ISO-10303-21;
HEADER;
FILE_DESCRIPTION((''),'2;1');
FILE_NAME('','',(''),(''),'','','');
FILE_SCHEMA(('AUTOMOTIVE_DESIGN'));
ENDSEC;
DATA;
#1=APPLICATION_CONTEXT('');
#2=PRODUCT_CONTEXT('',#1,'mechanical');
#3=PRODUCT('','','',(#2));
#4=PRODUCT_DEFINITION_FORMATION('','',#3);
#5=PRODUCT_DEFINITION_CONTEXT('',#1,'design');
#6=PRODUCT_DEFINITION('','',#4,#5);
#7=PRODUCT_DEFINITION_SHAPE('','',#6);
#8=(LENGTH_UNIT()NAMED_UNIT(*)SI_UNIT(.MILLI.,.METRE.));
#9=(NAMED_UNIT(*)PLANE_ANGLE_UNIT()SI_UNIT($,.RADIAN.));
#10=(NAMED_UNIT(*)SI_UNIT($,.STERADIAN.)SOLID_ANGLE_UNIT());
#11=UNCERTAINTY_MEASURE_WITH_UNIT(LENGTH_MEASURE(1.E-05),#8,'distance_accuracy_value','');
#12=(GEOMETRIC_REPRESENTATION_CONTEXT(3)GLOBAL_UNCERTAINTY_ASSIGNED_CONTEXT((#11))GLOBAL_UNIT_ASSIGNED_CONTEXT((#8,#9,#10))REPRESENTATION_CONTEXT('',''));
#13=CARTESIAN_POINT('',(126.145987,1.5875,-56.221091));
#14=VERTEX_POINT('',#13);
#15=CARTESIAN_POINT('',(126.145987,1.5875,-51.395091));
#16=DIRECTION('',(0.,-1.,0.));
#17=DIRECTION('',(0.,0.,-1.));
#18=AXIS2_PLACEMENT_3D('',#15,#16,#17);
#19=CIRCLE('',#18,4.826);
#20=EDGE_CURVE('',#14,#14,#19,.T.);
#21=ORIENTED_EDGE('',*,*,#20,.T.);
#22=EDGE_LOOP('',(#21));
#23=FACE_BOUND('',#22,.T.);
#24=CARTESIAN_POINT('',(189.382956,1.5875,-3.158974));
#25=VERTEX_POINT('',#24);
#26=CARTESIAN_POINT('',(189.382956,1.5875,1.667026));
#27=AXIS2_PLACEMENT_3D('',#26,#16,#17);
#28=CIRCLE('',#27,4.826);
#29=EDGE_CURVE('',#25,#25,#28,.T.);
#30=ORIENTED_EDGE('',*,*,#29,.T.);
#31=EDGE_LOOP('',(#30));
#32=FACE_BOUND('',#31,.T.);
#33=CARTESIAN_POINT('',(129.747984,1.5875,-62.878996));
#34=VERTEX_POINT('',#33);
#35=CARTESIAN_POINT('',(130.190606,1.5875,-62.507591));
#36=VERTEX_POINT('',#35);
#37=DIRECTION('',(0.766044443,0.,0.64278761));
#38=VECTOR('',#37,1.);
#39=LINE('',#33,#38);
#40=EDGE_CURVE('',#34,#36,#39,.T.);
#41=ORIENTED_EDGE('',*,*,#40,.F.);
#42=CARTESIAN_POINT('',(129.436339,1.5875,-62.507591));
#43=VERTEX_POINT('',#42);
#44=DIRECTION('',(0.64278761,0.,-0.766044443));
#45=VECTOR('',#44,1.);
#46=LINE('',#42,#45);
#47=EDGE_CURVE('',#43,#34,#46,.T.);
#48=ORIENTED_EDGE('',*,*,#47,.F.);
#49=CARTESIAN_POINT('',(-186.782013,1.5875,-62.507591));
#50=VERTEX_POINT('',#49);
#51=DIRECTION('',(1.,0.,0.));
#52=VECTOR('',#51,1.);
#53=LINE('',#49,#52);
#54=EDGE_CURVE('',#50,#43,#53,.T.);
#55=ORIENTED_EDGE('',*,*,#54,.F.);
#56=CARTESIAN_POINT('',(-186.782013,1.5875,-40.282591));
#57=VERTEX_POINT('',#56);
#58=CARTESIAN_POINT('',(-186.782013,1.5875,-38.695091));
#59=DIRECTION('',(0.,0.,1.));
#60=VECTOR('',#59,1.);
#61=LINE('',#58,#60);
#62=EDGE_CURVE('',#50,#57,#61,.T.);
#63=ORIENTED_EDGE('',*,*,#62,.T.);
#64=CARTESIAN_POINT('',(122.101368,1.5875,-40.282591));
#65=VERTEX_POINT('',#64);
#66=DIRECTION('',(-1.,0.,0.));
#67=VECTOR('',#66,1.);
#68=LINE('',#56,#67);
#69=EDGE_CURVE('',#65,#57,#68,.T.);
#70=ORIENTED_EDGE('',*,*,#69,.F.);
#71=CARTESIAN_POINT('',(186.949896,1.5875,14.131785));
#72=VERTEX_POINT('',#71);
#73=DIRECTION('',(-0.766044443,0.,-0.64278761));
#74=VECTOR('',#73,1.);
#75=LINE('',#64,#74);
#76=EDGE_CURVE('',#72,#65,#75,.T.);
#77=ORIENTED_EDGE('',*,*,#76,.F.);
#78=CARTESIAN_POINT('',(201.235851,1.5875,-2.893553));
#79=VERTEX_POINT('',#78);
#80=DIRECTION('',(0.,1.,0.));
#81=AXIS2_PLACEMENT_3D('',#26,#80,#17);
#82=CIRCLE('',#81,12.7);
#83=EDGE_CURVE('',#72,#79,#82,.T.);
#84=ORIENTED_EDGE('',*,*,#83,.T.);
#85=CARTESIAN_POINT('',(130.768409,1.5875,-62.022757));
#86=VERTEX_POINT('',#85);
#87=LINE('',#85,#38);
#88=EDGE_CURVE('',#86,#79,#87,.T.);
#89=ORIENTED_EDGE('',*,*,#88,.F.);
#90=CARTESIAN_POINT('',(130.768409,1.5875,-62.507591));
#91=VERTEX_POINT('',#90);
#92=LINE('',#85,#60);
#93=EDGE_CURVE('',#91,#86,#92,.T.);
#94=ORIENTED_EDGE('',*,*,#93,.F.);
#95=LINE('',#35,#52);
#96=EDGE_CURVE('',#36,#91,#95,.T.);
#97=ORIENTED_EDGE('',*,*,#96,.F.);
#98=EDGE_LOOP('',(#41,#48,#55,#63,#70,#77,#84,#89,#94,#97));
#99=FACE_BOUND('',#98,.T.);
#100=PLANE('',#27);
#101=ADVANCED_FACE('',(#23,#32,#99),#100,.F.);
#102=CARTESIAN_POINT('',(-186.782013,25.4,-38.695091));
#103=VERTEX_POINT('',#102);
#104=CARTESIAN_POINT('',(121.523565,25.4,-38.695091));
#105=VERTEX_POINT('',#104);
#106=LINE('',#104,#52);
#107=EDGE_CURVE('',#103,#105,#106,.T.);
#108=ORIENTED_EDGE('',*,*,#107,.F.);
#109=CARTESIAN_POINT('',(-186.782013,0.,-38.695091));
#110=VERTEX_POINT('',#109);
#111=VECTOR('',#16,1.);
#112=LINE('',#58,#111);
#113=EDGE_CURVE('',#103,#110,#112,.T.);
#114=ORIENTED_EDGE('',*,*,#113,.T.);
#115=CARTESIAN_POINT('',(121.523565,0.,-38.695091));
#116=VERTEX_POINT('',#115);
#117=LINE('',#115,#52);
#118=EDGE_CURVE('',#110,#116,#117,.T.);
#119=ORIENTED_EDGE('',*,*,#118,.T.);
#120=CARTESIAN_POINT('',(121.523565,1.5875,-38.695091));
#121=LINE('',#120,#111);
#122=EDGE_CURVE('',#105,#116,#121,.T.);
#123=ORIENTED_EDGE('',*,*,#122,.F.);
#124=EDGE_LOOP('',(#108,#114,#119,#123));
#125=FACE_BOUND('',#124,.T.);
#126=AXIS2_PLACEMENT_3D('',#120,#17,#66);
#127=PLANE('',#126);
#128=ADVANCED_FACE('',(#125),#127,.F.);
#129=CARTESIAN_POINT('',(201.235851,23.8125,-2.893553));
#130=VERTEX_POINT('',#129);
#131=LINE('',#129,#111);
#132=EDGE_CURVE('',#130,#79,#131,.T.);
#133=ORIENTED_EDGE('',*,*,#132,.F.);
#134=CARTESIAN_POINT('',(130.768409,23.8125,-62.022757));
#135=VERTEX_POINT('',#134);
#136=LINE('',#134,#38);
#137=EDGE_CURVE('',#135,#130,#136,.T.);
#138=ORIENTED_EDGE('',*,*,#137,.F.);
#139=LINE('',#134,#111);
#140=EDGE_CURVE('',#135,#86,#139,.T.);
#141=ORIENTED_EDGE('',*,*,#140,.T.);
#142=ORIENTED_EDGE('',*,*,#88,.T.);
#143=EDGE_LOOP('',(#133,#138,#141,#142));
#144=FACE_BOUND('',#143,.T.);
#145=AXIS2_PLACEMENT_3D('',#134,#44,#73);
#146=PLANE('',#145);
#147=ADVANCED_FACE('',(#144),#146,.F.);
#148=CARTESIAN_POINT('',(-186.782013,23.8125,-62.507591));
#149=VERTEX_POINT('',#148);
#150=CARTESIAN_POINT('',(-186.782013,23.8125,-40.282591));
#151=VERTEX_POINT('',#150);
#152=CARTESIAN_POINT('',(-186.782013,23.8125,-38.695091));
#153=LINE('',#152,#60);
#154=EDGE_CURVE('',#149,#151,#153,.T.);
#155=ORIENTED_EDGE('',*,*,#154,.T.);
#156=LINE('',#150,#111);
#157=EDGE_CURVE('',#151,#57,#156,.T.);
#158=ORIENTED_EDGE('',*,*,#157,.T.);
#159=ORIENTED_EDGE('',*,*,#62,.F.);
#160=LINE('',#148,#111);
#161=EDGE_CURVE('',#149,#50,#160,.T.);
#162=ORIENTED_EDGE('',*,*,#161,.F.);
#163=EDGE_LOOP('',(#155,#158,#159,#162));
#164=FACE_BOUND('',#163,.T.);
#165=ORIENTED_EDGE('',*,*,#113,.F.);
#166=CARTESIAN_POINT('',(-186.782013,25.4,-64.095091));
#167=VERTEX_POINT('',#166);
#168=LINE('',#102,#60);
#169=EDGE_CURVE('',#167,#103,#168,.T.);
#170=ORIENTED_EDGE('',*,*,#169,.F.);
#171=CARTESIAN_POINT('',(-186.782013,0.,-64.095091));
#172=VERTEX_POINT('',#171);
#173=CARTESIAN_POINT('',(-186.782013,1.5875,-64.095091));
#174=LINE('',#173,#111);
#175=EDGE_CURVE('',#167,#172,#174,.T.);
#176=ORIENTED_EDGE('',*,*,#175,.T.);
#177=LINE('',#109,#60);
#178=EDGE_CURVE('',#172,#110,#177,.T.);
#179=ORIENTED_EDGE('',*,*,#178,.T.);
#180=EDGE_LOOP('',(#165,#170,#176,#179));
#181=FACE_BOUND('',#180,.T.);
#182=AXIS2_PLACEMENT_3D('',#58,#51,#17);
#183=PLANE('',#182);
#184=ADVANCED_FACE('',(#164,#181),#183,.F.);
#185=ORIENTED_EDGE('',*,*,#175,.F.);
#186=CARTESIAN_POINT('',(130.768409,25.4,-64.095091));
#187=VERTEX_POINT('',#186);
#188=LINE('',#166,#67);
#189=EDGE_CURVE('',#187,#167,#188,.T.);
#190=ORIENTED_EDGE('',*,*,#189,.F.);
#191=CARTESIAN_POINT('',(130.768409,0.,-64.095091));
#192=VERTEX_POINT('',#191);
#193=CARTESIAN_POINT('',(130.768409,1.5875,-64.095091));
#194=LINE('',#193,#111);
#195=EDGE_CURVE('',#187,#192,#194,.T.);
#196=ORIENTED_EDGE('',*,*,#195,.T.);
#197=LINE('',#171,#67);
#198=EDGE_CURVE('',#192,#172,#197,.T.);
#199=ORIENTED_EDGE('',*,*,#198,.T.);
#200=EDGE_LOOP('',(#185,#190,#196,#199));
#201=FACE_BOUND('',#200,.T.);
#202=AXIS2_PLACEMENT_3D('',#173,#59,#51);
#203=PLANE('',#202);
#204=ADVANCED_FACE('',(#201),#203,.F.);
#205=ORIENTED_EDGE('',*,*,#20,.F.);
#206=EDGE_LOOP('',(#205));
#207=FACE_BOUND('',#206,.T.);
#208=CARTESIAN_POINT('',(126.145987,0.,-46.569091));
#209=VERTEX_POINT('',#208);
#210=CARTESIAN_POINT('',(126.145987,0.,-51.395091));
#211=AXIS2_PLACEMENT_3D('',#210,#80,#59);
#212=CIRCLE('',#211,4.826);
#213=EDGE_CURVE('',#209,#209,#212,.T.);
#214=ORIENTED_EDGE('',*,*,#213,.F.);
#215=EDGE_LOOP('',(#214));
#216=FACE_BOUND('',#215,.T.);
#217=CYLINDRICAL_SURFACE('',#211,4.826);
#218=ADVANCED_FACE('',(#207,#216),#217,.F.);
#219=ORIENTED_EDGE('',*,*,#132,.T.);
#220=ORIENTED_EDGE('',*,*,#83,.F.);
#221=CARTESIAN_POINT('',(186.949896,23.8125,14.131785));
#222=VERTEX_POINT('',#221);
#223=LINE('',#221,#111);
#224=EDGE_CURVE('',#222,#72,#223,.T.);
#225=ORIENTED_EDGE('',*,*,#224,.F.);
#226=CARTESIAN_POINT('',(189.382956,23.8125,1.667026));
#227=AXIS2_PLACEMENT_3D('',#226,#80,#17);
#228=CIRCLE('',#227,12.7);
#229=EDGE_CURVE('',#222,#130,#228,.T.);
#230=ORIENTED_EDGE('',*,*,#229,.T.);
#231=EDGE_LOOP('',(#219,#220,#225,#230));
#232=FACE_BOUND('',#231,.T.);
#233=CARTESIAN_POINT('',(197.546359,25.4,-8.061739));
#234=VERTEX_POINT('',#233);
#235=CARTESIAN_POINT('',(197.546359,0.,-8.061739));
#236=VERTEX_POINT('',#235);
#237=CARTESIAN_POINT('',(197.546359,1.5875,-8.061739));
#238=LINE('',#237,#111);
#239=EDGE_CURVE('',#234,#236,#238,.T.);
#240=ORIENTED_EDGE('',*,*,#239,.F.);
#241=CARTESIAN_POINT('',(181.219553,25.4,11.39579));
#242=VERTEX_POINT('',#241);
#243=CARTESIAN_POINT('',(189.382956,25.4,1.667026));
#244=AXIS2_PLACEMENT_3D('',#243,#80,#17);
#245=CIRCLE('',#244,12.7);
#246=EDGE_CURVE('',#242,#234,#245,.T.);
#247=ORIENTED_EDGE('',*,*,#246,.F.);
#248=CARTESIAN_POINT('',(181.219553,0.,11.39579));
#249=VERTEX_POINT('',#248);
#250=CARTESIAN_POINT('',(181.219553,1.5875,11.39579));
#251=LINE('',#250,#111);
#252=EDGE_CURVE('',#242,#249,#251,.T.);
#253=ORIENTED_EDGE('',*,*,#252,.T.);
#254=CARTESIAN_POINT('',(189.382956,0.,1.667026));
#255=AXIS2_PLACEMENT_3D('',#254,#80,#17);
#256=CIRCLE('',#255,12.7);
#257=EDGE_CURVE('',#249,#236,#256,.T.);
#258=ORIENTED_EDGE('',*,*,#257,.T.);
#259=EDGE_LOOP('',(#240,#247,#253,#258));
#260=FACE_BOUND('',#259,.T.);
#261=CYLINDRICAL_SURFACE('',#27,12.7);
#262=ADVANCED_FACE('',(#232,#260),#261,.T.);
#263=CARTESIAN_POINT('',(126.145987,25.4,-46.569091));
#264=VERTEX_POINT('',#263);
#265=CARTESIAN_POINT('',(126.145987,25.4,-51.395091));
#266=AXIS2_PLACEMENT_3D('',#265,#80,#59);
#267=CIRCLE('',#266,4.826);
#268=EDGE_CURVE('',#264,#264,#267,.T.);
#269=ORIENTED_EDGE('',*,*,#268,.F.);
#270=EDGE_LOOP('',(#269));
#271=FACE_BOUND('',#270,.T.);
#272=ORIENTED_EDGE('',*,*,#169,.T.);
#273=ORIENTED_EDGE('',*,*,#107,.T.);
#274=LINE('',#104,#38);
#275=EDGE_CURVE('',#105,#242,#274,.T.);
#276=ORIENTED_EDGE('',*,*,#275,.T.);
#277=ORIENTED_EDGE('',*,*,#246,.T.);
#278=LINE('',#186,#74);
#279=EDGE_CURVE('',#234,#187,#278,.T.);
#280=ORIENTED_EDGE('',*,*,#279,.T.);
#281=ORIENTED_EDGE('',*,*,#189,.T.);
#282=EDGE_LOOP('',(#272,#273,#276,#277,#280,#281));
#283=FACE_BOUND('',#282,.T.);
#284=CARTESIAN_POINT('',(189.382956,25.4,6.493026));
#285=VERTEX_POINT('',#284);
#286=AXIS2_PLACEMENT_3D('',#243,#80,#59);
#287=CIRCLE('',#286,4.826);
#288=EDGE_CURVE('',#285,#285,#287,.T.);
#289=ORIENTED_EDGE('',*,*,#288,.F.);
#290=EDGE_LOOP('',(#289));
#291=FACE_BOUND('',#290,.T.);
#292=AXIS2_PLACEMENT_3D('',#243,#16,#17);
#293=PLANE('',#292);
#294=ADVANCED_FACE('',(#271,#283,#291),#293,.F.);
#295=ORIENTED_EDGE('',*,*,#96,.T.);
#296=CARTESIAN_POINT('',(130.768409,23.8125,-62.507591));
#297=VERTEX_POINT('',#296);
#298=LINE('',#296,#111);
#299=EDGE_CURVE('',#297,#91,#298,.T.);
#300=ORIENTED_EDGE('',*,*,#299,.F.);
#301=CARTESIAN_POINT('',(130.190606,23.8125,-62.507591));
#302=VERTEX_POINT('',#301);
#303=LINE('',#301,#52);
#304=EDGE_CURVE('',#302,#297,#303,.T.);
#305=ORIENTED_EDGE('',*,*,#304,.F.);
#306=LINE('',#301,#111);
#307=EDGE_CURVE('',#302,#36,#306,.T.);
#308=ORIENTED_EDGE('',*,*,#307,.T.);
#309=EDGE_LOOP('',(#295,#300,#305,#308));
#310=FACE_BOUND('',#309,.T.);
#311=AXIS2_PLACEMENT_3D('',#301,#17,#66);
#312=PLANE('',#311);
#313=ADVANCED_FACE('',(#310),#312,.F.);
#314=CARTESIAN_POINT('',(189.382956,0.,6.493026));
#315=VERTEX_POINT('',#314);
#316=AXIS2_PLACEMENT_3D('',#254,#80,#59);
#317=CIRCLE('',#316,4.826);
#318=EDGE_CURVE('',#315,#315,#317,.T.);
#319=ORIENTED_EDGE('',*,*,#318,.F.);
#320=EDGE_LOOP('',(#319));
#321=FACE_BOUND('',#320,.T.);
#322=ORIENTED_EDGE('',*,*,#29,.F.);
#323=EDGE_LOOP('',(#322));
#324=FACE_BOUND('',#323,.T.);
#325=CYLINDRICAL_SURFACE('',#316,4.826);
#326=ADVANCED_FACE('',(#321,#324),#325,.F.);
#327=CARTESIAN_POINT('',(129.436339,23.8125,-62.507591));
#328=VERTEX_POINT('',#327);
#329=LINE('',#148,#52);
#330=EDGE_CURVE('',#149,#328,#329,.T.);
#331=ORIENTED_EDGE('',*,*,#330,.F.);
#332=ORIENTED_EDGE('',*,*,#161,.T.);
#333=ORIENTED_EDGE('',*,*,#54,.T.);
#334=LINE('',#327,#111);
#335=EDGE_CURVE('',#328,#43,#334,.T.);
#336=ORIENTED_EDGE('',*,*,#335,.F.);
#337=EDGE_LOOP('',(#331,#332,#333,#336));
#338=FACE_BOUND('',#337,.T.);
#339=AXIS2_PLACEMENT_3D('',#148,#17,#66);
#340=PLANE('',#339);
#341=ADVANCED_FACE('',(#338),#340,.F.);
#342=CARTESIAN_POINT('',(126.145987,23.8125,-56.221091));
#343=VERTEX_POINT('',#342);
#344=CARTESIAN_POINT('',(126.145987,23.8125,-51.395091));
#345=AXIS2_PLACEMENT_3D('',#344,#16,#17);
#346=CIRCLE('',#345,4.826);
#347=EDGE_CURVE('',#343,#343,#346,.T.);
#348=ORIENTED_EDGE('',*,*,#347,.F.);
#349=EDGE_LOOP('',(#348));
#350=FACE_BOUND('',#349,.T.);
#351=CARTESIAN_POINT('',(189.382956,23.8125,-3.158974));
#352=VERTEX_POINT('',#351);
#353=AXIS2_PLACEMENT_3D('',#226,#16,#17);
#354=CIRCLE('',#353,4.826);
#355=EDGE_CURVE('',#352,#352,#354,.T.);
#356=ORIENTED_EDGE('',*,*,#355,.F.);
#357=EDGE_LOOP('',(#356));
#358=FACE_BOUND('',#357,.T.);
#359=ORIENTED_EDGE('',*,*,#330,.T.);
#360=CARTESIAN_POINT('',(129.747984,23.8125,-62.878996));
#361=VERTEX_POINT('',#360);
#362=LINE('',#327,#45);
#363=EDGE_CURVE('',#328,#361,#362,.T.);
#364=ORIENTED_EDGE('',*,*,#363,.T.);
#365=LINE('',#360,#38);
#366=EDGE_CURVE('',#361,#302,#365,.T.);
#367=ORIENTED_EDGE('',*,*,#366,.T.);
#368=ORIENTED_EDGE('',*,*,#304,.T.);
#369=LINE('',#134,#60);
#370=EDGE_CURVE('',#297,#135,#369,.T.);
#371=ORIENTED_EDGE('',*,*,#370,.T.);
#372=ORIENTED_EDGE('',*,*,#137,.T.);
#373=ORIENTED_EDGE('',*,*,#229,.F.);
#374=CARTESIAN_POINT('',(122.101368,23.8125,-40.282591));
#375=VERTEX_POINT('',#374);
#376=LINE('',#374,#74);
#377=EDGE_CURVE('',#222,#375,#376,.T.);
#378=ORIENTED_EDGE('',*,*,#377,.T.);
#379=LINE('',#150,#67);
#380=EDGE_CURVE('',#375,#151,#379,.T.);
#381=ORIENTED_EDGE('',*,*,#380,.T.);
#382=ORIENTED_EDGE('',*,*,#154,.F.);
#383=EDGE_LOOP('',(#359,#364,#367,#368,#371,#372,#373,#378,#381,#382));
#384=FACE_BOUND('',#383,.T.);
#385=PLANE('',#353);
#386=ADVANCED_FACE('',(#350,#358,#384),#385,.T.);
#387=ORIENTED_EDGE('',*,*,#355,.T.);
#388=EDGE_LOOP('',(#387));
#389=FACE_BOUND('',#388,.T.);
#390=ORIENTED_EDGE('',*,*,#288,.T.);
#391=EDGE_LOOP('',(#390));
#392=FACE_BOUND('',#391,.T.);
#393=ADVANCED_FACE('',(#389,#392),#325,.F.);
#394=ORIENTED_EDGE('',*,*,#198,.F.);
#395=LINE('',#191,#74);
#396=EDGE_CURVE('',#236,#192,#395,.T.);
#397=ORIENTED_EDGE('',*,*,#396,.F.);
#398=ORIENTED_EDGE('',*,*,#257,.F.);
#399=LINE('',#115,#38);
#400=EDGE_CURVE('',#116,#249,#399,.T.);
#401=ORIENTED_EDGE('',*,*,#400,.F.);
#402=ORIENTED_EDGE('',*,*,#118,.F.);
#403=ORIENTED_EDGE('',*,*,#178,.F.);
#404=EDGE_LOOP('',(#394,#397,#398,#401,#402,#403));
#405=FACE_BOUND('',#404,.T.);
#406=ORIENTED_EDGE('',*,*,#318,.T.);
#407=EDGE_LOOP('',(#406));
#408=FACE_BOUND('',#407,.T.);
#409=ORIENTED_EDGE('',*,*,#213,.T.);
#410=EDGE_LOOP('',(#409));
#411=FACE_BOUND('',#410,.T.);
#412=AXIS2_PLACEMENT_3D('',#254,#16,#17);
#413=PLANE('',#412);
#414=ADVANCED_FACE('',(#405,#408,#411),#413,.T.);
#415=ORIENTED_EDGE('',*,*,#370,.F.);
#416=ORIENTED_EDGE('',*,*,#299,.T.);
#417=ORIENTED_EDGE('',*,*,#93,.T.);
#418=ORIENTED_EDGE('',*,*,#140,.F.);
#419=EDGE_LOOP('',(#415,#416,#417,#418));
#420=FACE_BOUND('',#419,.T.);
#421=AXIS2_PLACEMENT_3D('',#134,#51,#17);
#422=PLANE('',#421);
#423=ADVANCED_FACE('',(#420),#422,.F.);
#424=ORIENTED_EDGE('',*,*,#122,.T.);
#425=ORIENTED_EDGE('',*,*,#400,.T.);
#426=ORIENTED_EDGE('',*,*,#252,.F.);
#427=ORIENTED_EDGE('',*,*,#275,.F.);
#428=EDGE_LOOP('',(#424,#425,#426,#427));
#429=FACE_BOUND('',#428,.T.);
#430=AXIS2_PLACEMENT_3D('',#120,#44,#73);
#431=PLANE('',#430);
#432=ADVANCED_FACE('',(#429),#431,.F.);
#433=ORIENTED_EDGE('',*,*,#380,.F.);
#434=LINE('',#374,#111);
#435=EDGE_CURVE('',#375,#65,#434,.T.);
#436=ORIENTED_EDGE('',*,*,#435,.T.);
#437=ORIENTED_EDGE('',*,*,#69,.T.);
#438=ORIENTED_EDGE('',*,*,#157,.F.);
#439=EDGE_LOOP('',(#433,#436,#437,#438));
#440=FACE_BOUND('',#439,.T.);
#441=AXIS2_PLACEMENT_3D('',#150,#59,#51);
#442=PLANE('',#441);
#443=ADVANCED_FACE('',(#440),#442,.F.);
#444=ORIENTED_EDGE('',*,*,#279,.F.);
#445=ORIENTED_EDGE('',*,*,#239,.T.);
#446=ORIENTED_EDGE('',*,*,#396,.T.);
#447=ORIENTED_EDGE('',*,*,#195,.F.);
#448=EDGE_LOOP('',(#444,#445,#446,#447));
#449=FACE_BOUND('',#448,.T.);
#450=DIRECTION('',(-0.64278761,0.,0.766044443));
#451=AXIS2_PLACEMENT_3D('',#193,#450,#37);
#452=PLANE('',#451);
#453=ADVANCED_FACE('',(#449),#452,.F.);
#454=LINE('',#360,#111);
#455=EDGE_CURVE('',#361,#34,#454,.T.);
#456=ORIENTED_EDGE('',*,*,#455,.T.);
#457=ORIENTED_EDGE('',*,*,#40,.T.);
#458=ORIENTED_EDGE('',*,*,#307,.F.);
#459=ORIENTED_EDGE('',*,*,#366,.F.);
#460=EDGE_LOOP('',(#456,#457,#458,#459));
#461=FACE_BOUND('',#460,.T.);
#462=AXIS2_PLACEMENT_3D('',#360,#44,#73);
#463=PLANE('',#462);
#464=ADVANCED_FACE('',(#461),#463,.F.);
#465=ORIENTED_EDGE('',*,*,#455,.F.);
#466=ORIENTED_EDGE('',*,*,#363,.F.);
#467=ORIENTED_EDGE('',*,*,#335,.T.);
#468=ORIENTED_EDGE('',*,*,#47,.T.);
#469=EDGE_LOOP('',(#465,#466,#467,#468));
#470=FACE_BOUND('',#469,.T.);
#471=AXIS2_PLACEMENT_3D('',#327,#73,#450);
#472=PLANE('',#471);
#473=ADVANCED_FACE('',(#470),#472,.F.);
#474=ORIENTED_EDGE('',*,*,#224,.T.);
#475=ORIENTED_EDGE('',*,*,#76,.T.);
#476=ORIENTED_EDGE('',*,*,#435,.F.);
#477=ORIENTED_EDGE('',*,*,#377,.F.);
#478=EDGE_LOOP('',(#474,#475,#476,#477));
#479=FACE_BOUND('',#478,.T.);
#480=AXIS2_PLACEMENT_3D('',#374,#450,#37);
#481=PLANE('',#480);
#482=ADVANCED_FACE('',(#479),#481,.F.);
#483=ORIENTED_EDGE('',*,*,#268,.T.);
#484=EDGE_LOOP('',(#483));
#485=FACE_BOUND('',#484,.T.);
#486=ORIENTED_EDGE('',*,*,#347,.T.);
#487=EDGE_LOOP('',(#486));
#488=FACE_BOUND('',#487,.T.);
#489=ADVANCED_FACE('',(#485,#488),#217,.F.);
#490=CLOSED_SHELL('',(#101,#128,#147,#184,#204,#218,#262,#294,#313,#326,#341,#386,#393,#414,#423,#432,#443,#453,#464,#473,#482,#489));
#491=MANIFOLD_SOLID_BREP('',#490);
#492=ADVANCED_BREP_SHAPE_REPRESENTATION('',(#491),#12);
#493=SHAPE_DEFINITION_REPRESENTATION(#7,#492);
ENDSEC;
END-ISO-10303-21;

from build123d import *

# Parameters (mm, degrees)
BOSS_EXTRUDE1_DEPTH = 1.5875
BOSS_EXTRUDE2_DEPTH = 22.225
BOSS_EXTRUDE3_DEPTH = 22.225
BOSS_EXTRUDE4_DEPTH = 1.5875
HOLE1_OUTLINE_R     = 4.826
HOLE1_DEPTH         = 25.4
HOLE2_OUTLINE_R     = 4.826
HOLE2_DEPTH         = 25.4


# Read off the part's stored shape, not the designer's step: Hole1, Hole2
with BuildPart() as part:
    # Sketch4 → Boss-Extrude1 (new body)
    with BuildSketch(Plane(origin=(0, 0, 0), x_dir=(1, 0, 0), z_dir=(0, 1, 0))):
        with BuildLine():
            Line((121.523565154, 38.695091361), (-186.782012798, 38.695091361))
            Line((-186.782012798, 38.695091361), (-186.782012798, 64.095091361))
            Line((-186.782012798, 64.095091361), (130.76840925, 64.095091361))
            Line((130.76840925, 64.095091361), (197.546358654, 8.061738645))
            ThreePointArc((197.546358654, 8.061738645), (199.111720445, -9.830428491), (181.219553308, -11.395790282))
            Line((181.219553308, -11.395790282), (121.523565154, 38.695091361))
        make_face()
    extrude(amount=BOSS_EXTRUDE1_DEPTH)

    # Sketch5 → Boss-Extrude2 (add)
    with BuildSketch(Plane(origin=(0, 1.5875, 0), x_dir=(1, 0, 0), z_dir=(0, 1, 0))):
        with BuildLine():
            Line((-186.782012798, 64.095091361), (-186.782012798, 62.507591361))
            Line((-186.782012798, 62.507591361), (129.436338508, 62.507591361))
            Line((129.436338508, 62.507591361), (129.74798387, 62.878995842))
            Line((129.74798387, 62.878995842), (130.190606494, 62.507591361))
            Line((130.190606494, 62.507591361), (130.768409293, 62.507591361))
            Line((130.768409293, 62.507591361), (130.768409293, 62.022757246))
            Line((130.768409293, 62.022757246), (201.235851163, 2.893552762))
            ThreePointArc((201.235851163, 2.893552762), (199.719327747, 5.7119592), (197.546358654, 8.061738645))
            Line((197.546358654, 8.061738645), (130.76840925, 64.095091361))
            Line((130.76840925, 64.095091361), (-186.782012798, 64.095091361))
        make_face()
    extrude(amount=BOSS_EXTRUDE2_DEPTH)

    # Sketch7 → Boss-Extrude3 (add)
    with BuildSketch(Plane(origin=(0, 1.5875, 0), x_dir=(1, 0, 0), z_dir=(0, 1, 0))):
        with BuildLine():
            Line((-186.782012798, 38.695091361), (-186.782012798, 40.282591361))
            Line((-186.782012798, 40.282591361), (122.10136791, 40.282591361))
            Line((122.10136791, 40.282591361), (186.949896399, -14.131784976))
            ThreePointArc((186.949896399, -14.131784976), (183.910966405, -13.127712138), (181.219553308, -11.395790282))
            Line((181.219553308, -11.395790282), (121.523565154, 38.695091361))
            Line((121.523565154, 38.695091361), (-186.782012798, 38.695091361))
        make_face()
    extrude(amount=BOSS_EXTRUDE3_DEPTH)

    # Sketch8 → Boss-Extrude4 (add)
    with BuildSketch(Plane(origin=(0, 23.8125, 0), x_dir=(1, 0, 0), z_dir=(0, 1, 0))):
        with BuildLine():
            Line((121.523565154, 38.695091361), (-186.782012798, 38.695091361))
            Line((-186.782012798, 38.695091361), (-186.782012798, 64.095091361))
            Line((-186.782012798, 64.095091361), (130.76840925, 64.095091361))
            Line((130.76840925, 64.095091361), (197.546358654, 8.061738645))
            ThreePointArc((197.546358654, 8.061738645), (199.111720445, -9.830428491), (181.219553308, -11.395790282))
            Line((181.219553308, -11.395790282), (121.523565154, 38.695091361))
        make_face()
    extrude(amount=BOSS_EXTRUDE4_DEPTH)

    # Hole1 outline → Hole1 (cut)
    with BuildSketch(Plane(origin=(0, 0, 0), x_dir=(1, 0, 0), z_dir=(0, 1, 0))):
        with Locations((189.382955981, -1.667025818)):
            Circle(HOLE1_OUTLINE_R)
    extrude(amount=HOLE1_DEPTH, mode=Mode.SUBTRACT)

    # Hole2 outline → Hole2 (cut)
    with BuildSketch(Plane(origin=(0, 0, 0), x_dir=(1, 0, 0), z_dir=(0, 1, 0))):
        with Locations((126.145987202, 51.395091361)):
            Circle(HOLE2_OUTLINE_R)
    extrude(amount=HOLE2_DEPTH, mode=Mode.SUBTRACT)


solid = part.part
